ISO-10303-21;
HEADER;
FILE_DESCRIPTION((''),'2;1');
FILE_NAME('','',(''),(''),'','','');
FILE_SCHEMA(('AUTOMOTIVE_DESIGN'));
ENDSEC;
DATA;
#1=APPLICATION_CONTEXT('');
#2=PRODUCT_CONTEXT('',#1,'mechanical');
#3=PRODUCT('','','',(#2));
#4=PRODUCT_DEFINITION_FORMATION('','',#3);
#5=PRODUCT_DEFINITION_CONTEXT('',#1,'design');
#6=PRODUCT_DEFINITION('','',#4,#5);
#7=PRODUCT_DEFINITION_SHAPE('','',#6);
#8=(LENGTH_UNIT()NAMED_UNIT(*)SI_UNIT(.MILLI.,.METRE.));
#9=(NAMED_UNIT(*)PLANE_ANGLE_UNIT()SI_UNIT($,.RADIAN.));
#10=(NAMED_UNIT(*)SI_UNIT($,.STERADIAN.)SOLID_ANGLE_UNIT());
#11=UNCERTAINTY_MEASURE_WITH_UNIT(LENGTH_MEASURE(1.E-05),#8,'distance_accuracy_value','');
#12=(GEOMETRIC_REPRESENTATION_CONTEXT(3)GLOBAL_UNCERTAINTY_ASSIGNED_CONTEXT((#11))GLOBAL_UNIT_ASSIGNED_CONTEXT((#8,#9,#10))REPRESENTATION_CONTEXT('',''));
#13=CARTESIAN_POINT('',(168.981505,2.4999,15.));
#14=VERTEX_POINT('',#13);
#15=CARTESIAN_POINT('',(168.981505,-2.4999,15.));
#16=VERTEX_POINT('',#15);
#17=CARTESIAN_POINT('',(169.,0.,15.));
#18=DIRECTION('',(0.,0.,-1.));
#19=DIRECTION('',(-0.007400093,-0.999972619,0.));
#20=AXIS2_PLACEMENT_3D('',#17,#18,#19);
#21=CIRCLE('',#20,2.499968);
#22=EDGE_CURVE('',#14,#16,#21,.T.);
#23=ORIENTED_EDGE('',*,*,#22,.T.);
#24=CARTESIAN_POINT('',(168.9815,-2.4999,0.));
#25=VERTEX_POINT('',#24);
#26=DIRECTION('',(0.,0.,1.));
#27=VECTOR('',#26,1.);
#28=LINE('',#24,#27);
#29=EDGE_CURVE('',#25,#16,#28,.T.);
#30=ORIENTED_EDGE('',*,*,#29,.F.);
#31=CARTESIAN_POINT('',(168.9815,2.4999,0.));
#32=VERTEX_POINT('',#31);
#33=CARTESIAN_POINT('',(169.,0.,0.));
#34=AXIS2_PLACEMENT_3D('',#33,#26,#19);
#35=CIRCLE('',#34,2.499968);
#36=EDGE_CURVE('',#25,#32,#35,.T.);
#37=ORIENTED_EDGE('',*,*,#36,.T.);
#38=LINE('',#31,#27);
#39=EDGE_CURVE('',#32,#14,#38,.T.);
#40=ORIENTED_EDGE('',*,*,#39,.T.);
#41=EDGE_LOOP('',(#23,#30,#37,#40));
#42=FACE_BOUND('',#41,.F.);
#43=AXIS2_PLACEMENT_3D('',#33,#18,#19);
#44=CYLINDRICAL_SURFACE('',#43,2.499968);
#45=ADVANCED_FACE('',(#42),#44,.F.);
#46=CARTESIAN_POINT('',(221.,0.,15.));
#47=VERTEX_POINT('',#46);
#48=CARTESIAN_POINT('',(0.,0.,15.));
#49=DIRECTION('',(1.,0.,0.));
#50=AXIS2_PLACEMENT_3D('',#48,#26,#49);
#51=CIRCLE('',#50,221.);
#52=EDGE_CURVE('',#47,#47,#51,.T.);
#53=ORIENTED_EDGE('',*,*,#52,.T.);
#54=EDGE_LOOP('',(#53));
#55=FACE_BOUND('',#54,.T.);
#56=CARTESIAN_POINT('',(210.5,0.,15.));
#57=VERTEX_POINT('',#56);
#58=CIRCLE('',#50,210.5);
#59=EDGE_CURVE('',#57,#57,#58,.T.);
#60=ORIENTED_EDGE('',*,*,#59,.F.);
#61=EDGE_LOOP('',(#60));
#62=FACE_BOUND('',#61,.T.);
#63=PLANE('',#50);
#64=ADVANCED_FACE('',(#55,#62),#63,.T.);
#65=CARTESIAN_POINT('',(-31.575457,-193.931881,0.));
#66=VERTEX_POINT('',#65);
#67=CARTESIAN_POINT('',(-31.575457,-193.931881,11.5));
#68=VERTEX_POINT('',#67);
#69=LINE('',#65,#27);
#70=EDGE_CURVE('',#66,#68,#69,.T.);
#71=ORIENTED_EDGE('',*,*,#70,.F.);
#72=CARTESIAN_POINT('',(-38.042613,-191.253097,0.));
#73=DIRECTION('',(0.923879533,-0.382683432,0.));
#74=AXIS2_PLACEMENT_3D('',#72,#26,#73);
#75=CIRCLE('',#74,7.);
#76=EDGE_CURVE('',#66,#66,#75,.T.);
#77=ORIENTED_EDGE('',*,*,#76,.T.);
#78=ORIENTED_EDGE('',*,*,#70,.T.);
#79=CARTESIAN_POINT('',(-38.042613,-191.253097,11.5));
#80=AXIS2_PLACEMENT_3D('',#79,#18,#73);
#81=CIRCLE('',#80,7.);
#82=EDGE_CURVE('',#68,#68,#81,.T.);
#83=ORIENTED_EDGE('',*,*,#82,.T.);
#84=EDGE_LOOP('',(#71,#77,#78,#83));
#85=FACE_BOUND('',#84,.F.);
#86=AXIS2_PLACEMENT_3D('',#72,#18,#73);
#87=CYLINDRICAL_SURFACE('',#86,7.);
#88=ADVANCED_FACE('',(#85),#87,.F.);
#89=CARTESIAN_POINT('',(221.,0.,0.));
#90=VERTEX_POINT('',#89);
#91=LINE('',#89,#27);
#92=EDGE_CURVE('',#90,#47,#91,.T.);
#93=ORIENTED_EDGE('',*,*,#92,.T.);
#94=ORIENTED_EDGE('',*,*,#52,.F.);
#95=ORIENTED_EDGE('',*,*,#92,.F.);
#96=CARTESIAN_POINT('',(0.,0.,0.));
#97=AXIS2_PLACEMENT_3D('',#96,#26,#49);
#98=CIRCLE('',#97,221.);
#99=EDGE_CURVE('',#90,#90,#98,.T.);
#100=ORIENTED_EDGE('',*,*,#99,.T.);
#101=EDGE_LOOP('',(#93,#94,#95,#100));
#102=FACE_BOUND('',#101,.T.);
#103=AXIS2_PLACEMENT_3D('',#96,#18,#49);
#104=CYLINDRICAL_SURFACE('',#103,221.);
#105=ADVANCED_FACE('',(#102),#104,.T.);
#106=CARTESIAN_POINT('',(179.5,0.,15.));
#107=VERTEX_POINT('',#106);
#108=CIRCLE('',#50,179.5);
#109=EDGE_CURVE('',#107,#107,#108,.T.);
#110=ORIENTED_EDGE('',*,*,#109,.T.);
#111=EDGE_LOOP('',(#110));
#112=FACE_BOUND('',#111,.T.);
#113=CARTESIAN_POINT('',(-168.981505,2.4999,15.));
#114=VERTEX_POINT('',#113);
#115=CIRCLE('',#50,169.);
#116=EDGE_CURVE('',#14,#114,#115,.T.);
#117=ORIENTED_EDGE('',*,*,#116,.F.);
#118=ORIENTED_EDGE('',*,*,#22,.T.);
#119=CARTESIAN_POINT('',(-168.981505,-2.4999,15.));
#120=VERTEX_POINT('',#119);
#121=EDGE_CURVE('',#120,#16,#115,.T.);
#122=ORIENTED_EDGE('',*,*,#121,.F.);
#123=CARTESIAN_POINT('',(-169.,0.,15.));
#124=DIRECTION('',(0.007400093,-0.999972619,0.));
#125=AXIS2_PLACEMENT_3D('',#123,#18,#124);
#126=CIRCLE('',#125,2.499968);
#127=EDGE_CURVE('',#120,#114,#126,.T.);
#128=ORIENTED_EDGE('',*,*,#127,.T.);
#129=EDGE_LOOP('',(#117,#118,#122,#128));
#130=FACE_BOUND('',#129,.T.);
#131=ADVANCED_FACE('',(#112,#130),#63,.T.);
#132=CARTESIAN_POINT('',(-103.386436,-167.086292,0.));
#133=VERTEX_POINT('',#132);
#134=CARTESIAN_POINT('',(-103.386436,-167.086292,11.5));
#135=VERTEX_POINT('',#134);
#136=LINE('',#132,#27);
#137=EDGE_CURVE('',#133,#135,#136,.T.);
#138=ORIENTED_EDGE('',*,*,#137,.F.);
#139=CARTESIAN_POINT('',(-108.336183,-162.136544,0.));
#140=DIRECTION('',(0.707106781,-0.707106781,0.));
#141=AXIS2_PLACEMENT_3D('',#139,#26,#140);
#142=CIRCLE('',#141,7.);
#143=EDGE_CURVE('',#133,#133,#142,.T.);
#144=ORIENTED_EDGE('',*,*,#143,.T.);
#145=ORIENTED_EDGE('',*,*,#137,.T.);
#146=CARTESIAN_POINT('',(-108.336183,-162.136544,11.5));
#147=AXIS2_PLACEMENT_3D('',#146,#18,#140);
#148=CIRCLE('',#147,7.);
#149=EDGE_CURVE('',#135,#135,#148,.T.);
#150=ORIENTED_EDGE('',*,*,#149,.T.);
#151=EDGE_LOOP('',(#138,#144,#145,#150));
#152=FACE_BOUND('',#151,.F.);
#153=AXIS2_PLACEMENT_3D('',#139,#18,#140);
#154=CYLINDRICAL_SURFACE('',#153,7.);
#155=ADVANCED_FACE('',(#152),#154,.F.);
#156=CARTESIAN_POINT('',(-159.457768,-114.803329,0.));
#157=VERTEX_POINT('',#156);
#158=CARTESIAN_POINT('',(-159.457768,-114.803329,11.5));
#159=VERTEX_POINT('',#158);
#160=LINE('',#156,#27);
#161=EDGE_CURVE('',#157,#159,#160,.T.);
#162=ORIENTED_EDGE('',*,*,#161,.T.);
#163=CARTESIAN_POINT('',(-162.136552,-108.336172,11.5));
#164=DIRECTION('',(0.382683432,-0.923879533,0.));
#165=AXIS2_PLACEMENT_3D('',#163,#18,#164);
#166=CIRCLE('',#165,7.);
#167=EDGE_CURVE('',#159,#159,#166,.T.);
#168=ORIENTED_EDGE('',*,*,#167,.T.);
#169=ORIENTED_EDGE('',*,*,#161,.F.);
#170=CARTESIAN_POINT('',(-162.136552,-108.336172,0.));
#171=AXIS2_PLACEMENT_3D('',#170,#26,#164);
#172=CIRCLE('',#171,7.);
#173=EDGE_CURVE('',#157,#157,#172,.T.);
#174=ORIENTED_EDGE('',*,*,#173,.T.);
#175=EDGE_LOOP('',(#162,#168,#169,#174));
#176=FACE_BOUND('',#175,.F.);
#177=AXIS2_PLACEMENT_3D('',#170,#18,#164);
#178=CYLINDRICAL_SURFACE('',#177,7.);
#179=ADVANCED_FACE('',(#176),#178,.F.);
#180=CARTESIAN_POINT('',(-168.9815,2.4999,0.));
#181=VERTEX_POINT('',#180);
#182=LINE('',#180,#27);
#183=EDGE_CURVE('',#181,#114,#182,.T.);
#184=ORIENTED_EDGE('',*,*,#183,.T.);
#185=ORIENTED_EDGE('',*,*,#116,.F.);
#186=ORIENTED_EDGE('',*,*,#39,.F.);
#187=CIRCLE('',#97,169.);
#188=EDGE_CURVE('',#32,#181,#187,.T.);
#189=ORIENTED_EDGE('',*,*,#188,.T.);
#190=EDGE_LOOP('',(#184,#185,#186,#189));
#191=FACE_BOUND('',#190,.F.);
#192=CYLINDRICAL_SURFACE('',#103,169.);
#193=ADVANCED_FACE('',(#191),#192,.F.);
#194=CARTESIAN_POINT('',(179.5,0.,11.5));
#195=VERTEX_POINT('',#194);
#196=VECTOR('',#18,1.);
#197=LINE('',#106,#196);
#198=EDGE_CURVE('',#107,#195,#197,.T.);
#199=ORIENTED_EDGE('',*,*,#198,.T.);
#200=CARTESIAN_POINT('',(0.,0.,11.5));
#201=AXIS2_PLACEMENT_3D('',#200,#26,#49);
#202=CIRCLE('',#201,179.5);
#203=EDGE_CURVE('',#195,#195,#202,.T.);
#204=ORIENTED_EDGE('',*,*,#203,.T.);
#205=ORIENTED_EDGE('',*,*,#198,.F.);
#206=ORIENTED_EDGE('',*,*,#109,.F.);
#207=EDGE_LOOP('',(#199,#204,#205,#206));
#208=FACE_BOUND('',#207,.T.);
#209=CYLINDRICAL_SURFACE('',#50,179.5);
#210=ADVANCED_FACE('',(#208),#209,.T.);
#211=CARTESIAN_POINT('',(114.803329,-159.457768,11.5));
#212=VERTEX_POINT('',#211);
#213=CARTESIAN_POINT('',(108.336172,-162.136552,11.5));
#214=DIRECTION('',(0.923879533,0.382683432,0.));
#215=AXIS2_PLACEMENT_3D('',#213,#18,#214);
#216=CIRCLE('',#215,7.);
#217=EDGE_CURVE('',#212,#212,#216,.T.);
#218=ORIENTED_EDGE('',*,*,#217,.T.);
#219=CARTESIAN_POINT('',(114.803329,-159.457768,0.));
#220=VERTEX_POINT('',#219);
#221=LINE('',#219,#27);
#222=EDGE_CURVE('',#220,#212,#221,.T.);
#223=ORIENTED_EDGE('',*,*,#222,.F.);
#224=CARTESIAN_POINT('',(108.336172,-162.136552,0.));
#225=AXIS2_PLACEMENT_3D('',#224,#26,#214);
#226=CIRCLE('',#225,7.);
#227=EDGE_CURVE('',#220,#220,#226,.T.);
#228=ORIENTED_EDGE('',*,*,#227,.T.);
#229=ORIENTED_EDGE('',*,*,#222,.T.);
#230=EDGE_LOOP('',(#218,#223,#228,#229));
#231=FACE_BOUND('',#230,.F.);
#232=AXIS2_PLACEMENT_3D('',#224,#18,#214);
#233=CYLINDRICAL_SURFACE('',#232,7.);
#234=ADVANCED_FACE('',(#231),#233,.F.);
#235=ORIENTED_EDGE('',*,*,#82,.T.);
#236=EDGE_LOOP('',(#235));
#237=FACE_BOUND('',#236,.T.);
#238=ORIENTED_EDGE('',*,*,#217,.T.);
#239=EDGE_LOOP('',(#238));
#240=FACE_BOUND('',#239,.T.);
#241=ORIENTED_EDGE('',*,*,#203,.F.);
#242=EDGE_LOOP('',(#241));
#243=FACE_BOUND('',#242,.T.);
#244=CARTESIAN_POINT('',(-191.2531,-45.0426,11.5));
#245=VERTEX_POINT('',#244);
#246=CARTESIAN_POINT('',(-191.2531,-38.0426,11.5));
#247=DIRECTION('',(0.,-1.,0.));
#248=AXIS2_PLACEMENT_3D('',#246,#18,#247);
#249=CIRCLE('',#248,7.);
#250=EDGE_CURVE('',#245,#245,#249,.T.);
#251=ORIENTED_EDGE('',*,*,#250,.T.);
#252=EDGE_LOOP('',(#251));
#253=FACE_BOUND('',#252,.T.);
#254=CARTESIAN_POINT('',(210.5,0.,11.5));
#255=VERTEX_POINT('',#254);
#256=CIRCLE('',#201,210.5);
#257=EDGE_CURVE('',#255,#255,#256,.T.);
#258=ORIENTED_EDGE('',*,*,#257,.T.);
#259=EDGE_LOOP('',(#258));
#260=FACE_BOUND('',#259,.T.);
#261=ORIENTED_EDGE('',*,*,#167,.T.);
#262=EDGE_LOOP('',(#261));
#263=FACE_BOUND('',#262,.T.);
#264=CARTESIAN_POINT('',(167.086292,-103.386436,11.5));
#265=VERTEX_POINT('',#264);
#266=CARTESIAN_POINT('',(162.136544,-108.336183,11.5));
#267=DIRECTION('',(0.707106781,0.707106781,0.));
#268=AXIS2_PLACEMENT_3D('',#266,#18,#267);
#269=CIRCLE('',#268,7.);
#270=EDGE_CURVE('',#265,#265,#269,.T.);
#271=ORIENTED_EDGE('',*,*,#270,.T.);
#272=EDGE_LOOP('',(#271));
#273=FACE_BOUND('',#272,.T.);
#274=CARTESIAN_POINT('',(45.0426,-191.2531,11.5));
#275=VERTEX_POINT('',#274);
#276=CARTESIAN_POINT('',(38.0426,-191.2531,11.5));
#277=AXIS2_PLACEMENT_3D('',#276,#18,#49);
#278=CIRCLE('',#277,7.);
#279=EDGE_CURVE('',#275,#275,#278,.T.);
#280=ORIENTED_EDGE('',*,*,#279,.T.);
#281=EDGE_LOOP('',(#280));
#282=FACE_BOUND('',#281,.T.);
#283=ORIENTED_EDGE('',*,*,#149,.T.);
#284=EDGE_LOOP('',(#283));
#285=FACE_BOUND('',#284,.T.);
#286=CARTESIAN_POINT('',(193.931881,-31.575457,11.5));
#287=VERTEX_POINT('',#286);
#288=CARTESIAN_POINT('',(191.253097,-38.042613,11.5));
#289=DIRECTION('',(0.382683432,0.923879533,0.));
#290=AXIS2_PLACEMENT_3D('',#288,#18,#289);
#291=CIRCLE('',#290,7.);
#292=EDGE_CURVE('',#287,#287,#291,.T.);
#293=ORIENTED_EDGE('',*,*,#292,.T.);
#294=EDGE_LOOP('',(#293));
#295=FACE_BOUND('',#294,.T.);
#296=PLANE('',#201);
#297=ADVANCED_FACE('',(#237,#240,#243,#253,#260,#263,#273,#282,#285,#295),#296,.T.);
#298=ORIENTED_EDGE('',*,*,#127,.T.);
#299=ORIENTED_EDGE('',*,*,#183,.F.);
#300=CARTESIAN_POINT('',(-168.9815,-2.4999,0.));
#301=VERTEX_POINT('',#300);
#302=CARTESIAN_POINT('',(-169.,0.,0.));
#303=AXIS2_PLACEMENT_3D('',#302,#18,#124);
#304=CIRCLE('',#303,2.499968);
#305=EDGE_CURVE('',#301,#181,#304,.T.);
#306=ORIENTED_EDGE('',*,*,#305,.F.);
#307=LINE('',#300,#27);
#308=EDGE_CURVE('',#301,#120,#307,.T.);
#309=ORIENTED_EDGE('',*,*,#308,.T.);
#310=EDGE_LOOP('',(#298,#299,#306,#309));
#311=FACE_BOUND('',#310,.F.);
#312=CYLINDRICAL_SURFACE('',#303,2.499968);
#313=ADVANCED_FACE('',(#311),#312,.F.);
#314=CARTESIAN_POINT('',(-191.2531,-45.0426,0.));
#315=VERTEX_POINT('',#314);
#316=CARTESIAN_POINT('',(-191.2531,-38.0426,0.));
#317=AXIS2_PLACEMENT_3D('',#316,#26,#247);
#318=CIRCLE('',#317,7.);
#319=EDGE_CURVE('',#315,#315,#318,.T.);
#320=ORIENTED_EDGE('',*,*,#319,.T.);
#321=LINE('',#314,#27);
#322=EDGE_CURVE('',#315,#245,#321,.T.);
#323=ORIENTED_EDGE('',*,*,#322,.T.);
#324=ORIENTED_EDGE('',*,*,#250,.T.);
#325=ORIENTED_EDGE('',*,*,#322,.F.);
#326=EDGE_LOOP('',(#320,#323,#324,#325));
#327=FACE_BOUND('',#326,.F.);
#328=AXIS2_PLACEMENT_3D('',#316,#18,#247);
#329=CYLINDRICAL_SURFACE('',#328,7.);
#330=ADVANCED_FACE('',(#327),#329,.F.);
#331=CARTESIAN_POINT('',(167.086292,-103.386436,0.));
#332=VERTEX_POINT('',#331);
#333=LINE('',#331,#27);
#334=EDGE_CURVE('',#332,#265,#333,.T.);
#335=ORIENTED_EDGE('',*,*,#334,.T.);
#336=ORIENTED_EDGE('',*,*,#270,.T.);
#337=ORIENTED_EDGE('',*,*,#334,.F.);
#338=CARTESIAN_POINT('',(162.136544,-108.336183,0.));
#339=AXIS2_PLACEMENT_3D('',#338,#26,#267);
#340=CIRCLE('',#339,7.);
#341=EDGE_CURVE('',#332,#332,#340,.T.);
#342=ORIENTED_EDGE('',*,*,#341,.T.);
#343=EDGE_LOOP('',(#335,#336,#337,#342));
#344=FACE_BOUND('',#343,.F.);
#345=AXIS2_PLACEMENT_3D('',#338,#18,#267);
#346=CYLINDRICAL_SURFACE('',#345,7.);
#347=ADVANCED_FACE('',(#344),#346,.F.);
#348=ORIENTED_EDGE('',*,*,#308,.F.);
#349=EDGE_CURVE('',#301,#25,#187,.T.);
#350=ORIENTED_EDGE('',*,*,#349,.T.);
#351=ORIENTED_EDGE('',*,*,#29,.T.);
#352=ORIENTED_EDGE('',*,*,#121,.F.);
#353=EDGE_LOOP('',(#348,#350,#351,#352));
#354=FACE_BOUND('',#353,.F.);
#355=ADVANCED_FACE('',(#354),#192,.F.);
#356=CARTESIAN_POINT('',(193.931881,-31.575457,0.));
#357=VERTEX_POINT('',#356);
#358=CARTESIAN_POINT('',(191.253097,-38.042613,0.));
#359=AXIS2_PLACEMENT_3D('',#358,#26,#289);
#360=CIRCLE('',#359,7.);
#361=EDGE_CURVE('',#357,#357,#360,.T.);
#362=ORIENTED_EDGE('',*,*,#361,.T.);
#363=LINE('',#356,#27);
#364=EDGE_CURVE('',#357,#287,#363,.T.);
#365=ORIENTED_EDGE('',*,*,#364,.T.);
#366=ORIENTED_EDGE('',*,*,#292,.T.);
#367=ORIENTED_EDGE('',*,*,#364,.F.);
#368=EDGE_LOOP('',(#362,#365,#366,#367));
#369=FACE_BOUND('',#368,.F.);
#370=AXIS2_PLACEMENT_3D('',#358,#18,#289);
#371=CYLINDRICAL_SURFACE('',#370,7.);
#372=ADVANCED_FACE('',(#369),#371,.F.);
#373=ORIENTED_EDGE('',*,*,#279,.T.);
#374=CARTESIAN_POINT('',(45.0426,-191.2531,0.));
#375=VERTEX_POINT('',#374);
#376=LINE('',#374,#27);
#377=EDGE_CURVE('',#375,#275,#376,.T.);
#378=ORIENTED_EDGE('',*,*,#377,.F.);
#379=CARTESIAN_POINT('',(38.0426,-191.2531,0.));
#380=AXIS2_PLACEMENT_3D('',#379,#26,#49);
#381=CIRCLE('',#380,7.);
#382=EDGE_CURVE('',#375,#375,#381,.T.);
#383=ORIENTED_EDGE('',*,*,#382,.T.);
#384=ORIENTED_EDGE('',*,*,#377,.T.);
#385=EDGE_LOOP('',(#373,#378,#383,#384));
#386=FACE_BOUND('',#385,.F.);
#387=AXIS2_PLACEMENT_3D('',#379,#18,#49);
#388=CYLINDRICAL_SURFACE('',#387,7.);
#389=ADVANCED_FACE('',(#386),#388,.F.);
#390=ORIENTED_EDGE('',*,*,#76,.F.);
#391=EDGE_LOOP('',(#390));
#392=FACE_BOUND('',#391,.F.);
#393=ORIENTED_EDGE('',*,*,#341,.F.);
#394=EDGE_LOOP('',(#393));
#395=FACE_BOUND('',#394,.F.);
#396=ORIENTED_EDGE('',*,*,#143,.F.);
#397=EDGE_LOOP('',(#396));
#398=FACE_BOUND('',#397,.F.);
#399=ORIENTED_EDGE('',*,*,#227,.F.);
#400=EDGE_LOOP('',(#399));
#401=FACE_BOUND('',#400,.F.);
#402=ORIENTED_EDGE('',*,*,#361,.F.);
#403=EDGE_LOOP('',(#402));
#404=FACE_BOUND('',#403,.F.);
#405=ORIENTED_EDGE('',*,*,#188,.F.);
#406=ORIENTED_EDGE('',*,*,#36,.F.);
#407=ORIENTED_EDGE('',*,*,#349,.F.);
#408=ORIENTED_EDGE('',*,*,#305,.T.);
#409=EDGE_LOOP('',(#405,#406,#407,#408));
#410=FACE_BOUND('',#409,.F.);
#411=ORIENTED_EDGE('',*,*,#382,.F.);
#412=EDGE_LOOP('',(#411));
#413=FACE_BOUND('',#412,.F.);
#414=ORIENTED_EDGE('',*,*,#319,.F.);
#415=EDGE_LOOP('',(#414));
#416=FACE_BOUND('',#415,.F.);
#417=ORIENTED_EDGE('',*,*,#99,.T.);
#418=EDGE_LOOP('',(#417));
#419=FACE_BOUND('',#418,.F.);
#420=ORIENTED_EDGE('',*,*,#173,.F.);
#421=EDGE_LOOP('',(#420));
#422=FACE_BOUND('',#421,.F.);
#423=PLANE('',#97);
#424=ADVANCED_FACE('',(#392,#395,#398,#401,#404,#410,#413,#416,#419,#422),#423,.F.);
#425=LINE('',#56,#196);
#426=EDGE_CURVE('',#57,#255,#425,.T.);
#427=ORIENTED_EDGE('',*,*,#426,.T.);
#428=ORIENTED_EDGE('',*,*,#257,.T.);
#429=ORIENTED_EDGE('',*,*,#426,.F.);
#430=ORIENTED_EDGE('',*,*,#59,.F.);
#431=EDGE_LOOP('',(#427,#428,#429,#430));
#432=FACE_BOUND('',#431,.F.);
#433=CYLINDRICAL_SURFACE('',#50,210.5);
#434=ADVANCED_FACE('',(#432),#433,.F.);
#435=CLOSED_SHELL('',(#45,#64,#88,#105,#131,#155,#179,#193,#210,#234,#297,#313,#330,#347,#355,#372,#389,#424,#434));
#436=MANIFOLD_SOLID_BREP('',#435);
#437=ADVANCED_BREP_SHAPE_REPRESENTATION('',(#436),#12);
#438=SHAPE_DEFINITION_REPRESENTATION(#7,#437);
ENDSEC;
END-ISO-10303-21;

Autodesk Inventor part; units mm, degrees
ref_plane "YZ Plane" through (0, 0, 0) normal (1, 0, 0) x (0, 1, 0)
ref_plane "XZ Plane" through (0, 0, 0) normal (0, 1, 0) x (-1, 0, 0)
ref_plane "XY Plane" through (0, 0, 0) normal (0, 0, 1) x (1, 0, 0)
sketch "Sketch1" plane through (0, 0, 0) normal (0, 0, 1) x (1, 0, 0)
  circle A0 centre (0, 0) radius 169
  circle A1 centre (0, 0) radius 221
  circle A2 centre (0, 0) radius 195 construction
  line L0 (0, 169) -> (0, 221) construction
  point P0 (0, 195)
  dimension "d17" = 390
  dimension "d18" = 52
extrude "Extrusion1" add sketch "Sketch1" along normal blind 15
sketch "Sketch2" plane through (0, 0, 15) normal (0, 0, 1) x (1, 0, 0)
  circle A0 centre (0, 0) radius 221 construction
  circle A1 centre (0, 0) radius 169 construction
  line L0 (0, 210.5) -> (0, 179.5) construction
  line L1 (0, 169) -> (0, 0) construction
  circle A2 centre (0, 0) radius 179.5
  circle A3 centre (0, 0) radius 210.5
  circle A4 centre (0, 0) radius 195 construction
  point P0 (0, 195)
  dimension "d19" = 390
  dimension "d4" = 31
extrude "Extrusion2" cut sketch "Sketch2" against normal blind 3.5
sketch "Sketch3" plane through (0, 0, 0) normal (0, 0, 1) x (1, 0, 0)
  circle A0 centre (0, 0) radius 169 construction
  circle A1 centre (0, 0) radius 221 construction
  circle A2 centre (0, 0) radius 179.5 projected
  circle A3 centre (0, 0) radius 210.5 projected
  circle A4 centre (0, 0) radius 221 projected
  line L0 (0, 0) -> (0, -221) construction
  line L1 (0, 0) -> (43.115, -216.7535) construction
  line L2 (35.0187, -176.051) -> (41.0665, -206.4553) construction
  circle A5 centre (38.0426, -191.2531) radius 7
  dimension "d20" = 11.25
  dimension "d21" = 14
extrude "Extrusion3" cut sketch "Sketch3" along normal through all contours A5
pattern_circular "Circular Pattern2" count 8 over 157.5 about axis through (0, 0, 0) along (0, 0, -1) of "Extrusion3" both ways yes
sketch "Sketch5" plane through (0, 0, 0) normal (0, 0, -1) x (-1, 0, 0)
  circle A0 centre (0, 0) radius 169 projected
  circle A1 centre (0, 0) radius 221 projected
  line L0 (0, 0) -> (169, 0) construction
  arc A2 (168.9815, -2.4999) -> (168.9815, 2.4999) centre (169, 0) ccw
  dimension "d36" = 5
extrude "Extrusion4" cut sketch "Sketch5" against normal through all contours A0 A2
mirror "Mirror1" about plane through (0, 0, 0) normal (1, 0, 0) of "Extrusion4"
equation "\"d17\" = Шпил_пласт_НОС_диам_центров"
equation "\"d19\" = Шпил_пласт_НОС_диам_центров"
equation "\"BendReliefDepth\" = 0.5 * Thickness"
equation "\"Шпил_пласт_НОС_диам_центров\" = 390"
equation "\"Thickness\" = 10"
properties part number "ДМФ 021 кольцо прижимное нос v2.0"
